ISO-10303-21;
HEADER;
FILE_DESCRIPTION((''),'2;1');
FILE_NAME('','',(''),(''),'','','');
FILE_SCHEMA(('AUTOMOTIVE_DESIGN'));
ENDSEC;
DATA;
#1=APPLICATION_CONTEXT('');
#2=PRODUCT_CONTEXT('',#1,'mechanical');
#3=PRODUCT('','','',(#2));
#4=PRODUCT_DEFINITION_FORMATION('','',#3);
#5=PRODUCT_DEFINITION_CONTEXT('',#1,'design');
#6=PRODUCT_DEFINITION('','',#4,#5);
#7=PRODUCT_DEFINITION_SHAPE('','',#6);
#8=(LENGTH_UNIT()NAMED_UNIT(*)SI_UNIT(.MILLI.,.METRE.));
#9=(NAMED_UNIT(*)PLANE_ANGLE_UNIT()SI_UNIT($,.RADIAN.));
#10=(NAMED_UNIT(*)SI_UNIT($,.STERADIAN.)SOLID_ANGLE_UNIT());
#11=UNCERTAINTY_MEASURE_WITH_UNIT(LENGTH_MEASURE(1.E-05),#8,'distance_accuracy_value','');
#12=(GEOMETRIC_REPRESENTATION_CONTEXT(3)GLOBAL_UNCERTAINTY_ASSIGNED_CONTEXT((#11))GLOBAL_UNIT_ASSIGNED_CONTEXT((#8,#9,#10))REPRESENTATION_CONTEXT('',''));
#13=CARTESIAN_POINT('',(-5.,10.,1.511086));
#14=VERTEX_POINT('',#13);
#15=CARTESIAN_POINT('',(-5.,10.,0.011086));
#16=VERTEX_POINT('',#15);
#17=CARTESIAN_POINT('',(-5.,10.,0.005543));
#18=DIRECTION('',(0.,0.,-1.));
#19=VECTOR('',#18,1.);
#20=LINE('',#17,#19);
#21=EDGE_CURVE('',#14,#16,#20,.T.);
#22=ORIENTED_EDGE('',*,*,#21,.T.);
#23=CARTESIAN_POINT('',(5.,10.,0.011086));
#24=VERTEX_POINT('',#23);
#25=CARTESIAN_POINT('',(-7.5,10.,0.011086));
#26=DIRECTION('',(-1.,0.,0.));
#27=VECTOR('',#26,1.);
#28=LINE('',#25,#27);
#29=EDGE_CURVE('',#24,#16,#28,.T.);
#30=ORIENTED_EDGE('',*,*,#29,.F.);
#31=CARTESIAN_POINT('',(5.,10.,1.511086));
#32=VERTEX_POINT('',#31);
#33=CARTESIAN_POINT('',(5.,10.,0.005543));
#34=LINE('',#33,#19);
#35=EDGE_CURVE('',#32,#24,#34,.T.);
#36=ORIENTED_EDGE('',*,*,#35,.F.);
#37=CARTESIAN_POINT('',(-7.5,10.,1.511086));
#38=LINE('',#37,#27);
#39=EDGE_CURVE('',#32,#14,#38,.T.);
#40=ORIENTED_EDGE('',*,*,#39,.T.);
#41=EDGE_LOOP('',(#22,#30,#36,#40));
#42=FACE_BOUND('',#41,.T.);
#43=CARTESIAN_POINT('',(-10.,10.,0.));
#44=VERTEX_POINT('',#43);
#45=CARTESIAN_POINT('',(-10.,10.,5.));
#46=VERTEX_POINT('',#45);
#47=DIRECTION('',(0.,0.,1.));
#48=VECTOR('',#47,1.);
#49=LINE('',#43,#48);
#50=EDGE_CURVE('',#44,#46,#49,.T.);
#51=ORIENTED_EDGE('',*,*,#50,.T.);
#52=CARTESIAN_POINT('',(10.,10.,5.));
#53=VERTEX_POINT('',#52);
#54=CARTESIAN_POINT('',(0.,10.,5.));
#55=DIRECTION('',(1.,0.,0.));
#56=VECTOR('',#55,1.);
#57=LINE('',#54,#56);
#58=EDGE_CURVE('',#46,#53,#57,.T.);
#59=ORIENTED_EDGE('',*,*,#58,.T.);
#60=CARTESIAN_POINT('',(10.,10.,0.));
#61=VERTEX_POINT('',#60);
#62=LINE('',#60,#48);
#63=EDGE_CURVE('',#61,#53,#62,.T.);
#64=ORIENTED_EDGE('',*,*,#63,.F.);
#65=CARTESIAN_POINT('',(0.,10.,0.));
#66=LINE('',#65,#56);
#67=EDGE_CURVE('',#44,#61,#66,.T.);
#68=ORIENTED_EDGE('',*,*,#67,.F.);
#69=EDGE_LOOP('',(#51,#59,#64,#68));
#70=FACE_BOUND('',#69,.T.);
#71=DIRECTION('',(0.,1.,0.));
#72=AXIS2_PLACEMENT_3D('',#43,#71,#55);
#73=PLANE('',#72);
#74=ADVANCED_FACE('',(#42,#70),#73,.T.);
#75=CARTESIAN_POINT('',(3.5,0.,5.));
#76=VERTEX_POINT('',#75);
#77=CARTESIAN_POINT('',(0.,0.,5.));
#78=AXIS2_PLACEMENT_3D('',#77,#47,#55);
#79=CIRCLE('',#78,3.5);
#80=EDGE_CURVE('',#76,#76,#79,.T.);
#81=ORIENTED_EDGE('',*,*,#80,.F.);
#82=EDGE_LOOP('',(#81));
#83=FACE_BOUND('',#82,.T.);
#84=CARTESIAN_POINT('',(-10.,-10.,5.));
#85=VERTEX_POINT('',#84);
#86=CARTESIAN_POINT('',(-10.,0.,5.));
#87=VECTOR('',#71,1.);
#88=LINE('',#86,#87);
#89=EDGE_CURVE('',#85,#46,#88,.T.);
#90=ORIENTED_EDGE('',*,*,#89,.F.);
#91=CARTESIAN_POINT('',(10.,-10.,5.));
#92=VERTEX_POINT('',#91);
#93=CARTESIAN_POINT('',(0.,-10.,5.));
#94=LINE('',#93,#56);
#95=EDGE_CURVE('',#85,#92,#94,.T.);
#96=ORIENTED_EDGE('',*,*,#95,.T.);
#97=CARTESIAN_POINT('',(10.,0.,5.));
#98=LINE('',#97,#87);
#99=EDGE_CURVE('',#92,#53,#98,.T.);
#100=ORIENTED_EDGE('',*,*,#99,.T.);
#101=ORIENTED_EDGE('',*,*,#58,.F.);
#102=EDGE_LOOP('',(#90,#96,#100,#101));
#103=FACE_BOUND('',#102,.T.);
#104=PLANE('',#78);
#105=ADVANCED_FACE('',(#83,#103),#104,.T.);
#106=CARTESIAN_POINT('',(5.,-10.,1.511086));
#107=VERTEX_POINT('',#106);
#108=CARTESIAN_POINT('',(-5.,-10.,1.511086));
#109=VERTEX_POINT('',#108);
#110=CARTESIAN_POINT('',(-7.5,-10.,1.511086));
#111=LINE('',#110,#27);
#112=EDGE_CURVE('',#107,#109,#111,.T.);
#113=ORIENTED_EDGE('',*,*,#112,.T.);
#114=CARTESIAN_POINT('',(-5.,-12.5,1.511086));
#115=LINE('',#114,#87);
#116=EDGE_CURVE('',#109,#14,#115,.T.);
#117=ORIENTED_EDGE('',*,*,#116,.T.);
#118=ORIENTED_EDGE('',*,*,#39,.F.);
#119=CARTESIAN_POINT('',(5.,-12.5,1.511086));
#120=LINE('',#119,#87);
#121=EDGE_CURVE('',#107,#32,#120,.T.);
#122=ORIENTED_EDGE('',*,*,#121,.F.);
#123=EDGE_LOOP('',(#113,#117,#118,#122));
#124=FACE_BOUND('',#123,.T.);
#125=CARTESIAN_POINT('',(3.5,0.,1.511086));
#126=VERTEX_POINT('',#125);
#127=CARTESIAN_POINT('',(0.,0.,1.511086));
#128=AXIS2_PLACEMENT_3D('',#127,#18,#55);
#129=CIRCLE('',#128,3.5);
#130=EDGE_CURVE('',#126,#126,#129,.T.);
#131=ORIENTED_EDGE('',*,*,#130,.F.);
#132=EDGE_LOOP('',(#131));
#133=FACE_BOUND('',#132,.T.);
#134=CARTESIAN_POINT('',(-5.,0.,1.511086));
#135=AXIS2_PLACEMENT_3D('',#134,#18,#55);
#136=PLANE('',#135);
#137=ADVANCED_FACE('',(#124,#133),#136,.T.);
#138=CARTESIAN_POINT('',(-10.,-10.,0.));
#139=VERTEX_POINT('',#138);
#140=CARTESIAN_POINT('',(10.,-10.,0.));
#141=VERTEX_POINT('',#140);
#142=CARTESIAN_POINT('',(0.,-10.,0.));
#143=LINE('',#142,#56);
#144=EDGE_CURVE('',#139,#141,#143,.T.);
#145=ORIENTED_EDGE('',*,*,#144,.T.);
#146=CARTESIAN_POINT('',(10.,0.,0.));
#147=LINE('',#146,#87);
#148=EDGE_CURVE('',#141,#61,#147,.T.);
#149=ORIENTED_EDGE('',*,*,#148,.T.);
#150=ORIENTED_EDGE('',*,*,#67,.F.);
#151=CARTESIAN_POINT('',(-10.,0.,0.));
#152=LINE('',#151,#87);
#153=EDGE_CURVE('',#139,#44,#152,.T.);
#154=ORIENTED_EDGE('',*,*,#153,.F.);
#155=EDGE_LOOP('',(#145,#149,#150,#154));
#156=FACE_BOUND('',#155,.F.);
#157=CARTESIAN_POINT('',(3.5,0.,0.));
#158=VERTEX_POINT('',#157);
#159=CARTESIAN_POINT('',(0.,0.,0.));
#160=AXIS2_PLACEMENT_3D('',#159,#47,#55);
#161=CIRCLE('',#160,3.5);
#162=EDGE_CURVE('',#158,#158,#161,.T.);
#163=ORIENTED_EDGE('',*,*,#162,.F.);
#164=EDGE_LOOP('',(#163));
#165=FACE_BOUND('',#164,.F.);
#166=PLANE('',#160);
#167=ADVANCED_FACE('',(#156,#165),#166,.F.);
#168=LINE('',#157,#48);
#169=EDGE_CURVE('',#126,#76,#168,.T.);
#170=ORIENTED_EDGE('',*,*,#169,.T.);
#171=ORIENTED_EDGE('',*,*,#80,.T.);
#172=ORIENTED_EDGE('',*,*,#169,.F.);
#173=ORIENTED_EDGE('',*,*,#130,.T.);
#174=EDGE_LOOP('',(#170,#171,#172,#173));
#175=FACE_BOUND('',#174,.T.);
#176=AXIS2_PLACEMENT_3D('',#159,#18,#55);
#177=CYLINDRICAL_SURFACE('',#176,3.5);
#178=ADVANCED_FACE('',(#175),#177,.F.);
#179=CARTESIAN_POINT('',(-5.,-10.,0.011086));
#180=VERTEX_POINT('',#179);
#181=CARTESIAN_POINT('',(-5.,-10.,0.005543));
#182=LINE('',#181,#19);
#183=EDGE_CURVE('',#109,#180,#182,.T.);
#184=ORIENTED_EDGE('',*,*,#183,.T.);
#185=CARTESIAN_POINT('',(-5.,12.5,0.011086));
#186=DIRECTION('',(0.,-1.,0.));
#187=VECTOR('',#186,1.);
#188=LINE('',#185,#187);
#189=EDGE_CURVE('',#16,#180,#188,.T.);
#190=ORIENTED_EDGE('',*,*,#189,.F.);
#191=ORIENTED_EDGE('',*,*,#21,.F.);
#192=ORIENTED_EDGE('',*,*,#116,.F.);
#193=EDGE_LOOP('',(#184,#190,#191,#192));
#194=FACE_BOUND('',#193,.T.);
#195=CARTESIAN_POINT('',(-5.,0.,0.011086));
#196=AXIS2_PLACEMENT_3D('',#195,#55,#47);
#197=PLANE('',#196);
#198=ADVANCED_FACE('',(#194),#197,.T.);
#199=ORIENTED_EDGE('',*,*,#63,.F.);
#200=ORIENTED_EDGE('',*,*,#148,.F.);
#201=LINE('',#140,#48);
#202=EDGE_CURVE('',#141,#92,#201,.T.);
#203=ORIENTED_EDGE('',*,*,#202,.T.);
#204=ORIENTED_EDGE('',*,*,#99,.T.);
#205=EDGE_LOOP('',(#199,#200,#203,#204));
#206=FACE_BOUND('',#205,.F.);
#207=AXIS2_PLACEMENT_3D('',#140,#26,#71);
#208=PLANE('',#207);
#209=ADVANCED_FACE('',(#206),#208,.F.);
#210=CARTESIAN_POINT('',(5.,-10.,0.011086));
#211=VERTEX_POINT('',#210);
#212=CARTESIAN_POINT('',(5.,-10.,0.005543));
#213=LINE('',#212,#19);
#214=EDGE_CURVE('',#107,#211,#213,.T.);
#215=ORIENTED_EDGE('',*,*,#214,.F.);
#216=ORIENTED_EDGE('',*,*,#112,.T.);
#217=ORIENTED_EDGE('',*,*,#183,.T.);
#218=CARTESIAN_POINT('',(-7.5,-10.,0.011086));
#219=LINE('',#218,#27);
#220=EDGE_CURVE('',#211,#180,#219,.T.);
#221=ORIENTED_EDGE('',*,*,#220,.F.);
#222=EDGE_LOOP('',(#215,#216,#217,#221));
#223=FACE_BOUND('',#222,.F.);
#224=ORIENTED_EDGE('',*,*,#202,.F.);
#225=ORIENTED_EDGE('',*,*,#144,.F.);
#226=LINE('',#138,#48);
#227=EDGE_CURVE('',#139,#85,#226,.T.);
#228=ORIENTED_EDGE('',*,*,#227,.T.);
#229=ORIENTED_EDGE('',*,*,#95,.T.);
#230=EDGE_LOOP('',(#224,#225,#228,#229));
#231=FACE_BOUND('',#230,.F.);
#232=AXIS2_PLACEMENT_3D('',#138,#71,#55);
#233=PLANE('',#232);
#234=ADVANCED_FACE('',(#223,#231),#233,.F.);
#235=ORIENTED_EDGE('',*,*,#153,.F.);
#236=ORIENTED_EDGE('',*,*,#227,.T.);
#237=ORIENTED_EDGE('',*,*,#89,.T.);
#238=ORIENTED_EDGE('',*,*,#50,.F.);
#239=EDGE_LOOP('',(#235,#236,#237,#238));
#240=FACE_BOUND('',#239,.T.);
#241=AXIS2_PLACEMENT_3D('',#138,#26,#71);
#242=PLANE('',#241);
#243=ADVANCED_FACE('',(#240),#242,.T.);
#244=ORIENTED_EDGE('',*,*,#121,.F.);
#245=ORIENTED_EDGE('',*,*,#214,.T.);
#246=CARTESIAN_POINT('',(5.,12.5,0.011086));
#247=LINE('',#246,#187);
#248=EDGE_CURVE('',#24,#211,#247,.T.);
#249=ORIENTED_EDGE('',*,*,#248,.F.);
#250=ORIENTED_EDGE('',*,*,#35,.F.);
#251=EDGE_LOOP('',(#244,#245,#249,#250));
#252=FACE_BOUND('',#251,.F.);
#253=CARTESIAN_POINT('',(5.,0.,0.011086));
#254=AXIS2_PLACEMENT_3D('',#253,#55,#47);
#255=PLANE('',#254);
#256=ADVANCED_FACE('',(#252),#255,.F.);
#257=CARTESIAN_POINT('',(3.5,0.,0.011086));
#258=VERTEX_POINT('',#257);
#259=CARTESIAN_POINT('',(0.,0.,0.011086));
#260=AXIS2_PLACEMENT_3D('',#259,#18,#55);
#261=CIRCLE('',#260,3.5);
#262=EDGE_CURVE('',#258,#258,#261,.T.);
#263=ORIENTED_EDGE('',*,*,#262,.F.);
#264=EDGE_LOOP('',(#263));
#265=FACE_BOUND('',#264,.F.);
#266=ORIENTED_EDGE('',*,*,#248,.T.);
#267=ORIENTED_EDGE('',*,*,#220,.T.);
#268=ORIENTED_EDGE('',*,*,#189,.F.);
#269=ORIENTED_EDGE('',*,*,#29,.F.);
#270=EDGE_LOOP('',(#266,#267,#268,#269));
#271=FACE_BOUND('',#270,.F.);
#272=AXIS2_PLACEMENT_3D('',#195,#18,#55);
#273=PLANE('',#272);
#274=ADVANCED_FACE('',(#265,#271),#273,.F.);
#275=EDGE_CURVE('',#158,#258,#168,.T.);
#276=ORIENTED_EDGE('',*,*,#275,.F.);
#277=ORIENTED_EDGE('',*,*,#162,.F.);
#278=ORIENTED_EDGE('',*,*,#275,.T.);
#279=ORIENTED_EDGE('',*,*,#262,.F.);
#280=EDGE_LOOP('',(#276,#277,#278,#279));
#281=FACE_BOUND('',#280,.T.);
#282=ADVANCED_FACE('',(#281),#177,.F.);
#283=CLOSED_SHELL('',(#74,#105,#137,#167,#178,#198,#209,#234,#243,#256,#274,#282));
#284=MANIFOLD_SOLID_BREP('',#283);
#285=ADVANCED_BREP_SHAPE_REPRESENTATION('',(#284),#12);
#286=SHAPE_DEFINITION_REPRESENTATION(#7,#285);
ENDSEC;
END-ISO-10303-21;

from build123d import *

# Parameters (mm, degrees)
F0_W     = 20
F0_H     = 20
F0_R     = 3.5
F1_DEPTH = 5
F2_W     = 10
F2_H     = 1.5
F3_DEPTH = 12.5


# Not quite as in the source:
# - a feature names something its author has since deleted; it is built from what else it names


with BuildPart() as f1:
    # F0 (on Top) → F1 (new body)
    with BuildSketch(Plane.XY):
        Rectangle(F0_W, F0_H)
        Circle(F0_R, mode=Mode.SUBTRACT)
    extrude(amount=F1_DEPTH)

    # F2 (on Front) → F3 (cut, symmetric)
    with BuildSketch(Plane.XZ):
        with Locations((0, 0.7610858302)):
            Rectangle(F2_W, F2_H)
    extrude(amount=F3_DEPTH, both=True, mode=Mode.SUBTRACT)


solid = f1.part
